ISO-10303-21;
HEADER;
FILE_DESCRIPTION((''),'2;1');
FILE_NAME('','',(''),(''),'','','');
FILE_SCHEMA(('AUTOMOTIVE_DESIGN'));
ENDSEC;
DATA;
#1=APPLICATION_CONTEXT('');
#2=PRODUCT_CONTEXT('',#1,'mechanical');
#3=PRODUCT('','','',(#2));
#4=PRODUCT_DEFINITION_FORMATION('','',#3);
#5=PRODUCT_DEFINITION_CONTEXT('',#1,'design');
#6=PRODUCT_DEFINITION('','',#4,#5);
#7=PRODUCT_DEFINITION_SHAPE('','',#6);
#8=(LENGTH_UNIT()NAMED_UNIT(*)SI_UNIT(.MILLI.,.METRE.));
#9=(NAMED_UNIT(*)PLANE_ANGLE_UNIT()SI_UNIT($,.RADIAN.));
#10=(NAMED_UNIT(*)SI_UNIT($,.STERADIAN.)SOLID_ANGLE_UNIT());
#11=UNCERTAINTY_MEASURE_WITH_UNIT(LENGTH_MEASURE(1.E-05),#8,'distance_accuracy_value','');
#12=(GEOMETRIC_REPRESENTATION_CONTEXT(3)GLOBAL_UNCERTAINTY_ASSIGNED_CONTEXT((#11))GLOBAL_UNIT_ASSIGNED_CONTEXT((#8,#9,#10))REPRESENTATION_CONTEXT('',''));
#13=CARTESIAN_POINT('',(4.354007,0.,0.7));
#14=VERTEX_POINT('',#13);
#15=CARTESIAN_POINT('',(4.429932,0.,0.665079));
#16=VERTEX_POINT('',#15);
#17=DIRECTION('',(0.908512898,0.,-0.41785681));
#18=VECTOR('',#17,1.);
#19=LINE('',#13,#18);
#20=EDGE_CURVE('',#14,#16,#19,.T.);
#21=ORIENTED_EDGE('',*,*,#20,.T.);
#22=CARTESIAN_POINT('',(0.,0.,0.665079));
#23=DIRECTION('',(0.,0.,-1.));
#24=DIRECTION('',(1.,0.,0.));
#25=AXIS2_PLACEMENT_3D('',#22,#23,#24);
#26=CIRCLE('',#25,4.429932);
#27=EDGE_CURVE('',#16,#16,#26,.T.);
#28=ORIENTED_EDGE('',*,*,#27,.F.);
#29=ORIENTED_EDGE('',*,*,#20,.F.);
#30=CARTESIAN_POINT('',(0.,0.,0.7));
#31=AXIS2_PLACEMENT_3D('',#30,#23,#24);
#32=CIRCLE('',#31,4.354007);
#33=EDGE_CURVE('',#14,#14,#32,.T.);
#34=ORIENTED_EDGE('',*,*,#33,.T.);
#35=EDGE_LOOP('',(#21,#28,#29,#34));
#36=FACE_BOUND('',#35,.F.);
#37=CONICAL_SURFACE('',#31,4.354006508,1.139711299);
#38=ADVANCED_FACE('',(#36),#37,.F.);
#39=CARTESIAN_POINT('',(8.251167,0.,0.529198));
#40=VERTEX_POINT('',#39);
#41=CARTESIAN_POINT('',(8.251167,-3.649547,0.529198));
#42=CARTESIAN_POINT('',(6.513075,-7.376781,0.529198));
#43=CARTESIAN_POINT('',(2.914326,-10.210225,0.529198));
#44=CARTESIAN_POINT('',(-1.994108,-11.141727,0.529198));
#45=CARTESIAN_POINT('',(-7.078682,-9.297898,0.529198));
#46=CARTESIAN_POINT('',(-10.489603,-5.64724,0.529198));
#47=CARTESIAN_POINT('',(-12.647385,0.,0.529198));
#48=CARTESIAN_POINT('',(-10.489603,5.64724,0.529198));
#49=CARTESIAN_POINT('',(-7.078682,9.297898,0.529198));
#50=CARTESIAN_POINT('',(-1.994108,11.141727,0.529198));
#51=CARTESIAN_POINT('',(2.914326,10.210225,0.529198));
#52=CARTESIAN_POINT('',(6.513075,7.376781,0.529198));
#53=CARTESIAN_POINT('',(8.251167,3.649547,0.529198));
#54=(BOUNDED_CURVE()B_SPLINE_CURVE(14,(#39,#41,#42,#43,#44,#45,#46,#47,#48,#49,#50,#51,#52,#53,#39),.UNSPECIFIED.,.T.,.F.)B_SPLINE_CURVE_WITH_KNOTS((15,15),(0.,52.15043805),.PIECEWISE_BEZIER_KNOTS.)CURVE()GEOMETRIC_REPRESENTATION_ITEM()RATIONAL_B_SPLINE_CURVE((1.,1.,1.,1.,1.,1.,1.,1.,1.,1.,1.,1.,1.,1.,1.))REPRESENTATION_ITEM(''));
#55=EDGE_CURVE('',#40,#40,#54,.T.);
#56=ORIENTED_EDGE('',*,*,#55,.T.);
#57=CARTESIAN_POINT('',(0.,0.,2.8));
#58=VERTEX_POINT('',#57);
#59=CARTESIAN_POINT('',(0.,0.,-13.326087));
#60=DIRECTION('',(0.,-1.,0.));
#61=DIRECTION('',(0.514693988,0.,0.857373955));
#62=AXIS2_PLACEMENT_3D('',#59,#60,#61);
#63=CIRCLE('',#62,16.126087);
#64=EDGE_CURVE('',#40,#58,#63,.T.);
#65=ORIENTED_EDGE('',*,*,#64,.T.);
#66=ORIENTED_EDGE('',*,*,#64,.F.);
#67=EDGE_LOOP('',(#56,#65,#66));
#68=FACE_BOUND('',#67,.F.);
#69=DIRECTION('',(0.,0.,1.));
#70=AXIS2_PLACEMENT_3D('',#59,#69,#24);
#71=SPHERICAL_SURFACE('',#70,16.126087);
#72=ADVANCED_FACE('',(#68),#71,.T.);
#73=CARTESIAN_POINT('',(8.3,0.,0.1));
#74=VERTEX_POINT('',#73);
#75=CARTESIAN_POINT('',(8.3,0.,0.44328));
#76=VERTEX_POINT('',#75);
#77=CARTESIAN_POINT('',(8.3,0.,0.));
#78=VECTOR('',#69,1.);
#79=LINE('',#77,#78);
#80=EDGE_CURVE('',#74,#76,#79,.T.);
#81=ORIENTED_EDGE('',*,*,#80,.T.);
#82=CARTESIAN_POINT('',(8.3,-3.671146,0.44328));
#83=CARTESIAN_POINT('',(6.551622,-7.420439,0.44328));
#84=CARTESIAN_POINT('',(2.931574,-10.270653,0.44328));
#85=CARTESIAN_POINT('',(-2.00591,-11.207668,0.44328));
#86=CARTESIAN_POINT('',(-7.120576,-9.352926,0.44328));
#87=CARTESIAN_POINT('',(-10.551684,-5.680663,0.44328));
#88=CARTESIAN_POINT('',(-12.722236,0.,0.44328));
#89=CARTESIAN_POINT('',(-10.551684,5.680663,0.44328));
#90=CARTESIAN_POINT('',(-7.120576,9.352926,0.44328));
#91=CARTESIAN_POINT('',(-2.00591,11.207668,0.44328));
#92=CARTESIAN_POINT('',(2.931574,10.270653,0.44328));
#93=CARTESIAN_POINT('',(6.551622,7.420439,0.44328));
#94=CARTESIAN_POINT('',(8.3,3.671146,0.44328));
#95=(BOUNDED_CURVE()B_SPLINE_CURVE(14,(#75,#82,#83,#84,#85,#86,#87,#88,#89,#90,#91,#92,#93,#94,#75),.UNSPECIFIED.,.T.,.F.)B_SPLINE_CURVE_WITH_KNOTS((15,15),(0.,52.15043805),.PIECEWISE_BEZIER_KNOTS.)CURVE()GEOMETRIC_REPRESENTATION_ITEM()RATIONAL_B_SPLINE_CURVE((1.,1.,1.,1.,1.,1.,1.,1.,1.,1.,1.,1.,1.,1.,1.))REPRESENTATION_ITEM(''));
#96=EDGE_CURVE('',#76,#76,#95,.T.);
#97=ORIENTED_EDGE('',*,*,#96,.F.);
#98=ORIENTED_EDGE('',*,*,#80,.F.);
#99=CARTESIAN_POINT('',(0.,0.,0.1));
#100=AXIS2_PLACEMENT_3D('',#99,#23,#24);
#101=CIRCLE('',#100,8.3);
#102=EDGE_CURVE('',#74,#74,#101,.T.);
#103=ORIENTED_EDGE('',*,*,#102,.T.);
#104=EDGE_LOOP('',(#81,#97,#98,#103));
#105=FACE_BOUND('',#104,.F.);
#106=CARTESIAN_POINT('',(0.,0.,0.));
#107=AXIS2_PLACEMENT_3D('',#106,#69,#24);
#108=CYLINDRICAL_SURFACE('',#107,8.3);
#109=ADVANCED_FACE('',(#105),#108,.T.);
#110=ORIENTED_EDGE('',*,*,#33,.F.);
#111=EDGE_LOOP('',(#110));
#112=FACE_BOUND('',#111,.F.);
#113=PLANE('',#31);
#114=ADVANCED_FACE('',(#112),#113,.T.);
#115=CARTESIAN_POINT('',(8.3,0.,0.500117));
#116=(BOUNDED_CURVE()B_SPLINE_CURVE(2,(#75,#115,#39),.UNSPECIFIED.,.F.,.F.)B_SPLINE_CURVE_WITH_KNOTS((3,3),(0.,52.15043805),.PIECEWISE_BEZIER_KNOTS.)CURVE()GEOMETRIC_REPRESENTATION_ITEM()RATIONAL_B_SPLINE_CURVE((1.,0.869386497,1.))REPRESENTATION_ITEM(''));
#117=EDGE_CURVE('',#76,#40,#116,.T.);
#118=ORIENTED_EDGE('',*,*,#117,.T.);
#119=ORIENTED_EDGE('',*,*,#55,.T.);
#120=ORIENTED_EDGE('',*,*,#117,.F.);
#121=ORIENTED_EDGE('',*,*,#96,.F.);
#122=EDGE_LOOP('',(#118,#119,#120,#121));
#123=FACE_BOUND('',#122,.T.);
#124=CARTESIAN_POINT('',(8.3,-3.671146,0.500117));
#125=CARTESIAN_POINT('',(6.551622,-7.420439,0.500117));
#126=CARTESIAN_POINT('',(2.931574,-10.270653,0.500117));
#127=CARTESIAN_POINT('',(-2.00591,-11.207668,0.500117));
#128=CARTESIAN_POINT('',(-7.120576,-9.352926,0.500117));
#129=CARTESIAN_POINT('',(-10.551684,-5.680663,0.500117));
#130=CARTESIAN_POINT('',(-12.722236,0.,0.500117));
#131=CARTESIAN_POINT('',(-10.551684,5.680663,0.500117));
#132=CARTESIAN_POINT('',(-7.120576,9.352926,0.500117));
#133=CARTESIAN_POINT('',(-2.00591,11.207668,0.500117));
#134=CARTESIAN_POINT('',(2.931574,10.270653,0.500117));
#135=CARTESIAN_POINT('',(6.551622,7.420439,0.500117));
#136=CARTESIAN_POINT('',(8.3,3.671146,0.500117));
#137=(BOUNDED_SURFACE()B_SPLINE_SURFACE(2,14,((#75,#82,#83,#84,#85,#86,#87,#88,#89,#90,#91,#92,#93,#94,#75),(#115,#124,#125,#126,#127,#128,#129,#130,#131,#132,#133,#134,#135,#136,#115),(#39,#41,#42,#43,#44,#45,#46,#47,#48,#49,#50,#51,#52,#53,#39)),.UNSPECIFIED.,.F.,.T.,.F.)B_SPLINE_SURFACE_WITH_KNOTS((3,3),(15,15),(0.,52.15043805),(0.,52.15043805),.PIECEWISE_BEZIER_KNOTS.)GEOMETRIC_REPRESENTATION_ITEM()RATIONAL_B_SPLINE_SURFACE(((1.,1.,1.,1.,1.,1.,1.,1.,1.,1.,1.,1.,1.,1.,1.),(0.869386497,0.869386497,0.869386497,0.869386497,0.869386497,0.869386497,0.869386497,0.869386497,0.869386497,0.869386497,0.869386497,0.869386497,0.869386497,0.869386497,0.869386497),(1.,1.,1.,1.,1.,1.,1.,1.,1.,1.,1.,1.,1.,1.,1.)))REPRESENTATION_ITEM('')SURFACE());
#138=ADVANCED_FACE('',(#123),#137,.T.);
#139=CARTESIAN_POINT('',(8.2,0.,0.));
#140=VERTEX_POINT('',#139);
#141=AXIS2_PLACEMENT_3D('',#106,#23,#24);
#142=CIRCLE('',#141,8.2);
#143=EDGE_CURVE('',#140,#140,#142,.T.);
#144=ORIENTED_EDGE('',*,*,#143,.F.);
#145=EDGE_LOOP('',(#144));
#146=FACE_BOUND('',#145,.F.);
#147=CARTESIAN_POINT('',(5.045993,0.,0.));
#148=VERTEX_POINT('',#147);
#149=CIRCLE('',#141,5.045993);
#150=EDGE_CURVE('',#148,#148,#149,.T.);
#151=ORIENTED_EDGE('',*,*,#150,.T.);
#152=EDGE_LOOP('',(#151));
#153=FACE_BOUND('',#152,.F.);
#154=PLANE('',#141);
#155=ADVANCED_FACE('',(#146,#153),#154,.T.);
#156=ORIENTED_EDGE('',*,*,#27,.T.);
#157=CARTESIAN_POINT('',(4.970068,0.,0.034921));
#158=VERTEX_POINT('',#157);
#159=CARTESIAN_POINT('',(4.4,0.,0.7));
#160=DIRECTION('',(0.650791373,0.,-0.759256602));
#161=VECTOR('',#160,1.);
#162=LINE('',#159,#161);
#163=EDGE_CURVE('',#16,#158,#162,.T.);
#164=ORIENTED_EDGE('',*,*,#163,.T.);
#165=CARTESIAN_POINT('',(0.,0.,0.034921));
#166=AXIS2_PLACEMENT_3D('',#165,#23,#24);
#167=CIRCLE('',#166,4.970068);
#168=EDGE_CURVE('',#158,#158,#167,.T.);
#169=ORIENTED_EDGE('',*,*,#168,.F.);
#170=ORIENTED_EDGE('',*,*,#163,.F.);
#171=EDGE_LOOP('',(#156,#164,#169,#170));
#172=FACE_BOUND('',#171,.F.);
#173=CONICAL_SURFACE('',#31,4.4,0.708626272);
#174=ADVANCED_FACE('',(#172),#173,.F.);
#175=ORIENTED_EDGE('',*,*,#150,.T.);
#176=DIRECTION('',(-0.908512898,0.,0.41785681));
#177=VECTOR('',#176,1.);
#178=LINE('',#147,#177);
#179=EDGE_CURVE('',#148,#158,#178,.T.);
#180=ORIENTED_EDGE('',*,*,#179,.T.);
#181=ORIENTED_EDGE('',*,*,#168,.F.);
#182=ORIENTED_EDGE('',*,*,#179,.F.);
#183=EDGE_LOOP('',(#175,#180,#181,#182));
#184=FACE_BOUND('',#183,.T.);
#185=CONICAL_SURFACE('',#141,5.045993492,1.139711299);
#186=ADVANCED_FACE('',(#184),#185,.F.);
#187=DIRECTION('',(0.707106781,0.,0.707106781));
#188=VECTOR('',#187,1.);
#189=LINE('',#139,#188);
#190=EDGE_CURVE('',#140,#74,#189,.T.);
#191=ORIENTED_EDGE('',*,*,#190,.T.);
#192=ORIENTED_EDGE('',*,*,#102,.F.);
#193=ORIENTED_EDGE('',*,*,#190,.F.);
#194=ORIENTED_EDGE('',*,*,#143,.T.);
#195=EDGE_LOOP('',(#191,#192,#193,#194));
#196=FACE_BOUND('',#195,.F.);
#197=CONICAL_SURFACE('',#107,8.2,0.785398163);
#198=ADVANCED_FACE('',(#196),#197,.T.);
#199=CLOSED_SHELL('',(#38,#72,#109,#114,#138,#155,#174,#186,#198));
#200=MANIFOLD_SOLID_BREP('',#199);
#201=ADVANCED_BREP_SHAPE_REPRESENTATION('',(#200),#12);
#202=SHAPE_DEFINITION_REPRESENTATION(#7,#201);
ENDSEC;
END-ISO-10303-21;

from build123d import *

# Parameters (mm, degrees)
F3_R = 0.1


# Not quite as in the source:
# - a fillet or chamfer that OpenCascade refuses, or shapes differently, is made with other operations: its cross-section is extruded or revolved along the edge and cut away or added


with BuildPart() as f1:
    # F0 (on Front) → F1 (revolve)
    with BuildSketch(Plane.XZ):
        with BuildLine():
            Line((5, 0), (8.3, 0))
            Line((8.3, 0), (8.3, 0.5))
            ThreePointArc((8.3, 0.5), (4.3063906, 2.2143660784), (0, 2.8))
            Line((0, 2.8), (0, 0.7))
            Line((0, 0.7), (4.4, 0.7))
            Line((4.4, 0.7), (5, 0))
        make_face()
    revolve(axis=Axis((0, 0, 0.2605222398), (0, 0, -1)))

    # F2: chamfer of 0.1 on 3 edges, made by hand

    # F2_s1 → F2_t2 (revolve)
    with BuildSketch(Plane.XZ):
        Polygon((4.3540065078, 0.7), (4.429932168, 0.6650791373), (4.4, 0.7), align=None)
    revolve(axis=Axis((0, 0, 0.7), (0, 0, -1)))

    # F2_s3 → F2_t4 (revolve, cut)
    with BuildSketch(Plane.XZ):
        Polygon((8.2, 0), (8.3, 0.1), (8.3, 0), align=None)
    revolve(axis=Axis((0, 0, 0), (0, 0, -1)), mode=Mode.SUBTRACT)

    # F2_s5 → F2_t6 (revolve, cut)
    with BuildSketch(Plane.XZ):
        Polygon((5.0459934922, 0), (4.970067832, 0.0349208627), (5, 0), align=None)
    revolve(axis=Axis((0, 0, 0), (0, 0, -1)), mode=Mode.SUBTRACT)

    # F3
    f3_edges = [f1.edges().sort_by_distance(p)[0] for p in [
        (-8.3, 0, 0.5),
    ]]
    fillet(f3_edges, radius=F3_R)


solid = f1.part
